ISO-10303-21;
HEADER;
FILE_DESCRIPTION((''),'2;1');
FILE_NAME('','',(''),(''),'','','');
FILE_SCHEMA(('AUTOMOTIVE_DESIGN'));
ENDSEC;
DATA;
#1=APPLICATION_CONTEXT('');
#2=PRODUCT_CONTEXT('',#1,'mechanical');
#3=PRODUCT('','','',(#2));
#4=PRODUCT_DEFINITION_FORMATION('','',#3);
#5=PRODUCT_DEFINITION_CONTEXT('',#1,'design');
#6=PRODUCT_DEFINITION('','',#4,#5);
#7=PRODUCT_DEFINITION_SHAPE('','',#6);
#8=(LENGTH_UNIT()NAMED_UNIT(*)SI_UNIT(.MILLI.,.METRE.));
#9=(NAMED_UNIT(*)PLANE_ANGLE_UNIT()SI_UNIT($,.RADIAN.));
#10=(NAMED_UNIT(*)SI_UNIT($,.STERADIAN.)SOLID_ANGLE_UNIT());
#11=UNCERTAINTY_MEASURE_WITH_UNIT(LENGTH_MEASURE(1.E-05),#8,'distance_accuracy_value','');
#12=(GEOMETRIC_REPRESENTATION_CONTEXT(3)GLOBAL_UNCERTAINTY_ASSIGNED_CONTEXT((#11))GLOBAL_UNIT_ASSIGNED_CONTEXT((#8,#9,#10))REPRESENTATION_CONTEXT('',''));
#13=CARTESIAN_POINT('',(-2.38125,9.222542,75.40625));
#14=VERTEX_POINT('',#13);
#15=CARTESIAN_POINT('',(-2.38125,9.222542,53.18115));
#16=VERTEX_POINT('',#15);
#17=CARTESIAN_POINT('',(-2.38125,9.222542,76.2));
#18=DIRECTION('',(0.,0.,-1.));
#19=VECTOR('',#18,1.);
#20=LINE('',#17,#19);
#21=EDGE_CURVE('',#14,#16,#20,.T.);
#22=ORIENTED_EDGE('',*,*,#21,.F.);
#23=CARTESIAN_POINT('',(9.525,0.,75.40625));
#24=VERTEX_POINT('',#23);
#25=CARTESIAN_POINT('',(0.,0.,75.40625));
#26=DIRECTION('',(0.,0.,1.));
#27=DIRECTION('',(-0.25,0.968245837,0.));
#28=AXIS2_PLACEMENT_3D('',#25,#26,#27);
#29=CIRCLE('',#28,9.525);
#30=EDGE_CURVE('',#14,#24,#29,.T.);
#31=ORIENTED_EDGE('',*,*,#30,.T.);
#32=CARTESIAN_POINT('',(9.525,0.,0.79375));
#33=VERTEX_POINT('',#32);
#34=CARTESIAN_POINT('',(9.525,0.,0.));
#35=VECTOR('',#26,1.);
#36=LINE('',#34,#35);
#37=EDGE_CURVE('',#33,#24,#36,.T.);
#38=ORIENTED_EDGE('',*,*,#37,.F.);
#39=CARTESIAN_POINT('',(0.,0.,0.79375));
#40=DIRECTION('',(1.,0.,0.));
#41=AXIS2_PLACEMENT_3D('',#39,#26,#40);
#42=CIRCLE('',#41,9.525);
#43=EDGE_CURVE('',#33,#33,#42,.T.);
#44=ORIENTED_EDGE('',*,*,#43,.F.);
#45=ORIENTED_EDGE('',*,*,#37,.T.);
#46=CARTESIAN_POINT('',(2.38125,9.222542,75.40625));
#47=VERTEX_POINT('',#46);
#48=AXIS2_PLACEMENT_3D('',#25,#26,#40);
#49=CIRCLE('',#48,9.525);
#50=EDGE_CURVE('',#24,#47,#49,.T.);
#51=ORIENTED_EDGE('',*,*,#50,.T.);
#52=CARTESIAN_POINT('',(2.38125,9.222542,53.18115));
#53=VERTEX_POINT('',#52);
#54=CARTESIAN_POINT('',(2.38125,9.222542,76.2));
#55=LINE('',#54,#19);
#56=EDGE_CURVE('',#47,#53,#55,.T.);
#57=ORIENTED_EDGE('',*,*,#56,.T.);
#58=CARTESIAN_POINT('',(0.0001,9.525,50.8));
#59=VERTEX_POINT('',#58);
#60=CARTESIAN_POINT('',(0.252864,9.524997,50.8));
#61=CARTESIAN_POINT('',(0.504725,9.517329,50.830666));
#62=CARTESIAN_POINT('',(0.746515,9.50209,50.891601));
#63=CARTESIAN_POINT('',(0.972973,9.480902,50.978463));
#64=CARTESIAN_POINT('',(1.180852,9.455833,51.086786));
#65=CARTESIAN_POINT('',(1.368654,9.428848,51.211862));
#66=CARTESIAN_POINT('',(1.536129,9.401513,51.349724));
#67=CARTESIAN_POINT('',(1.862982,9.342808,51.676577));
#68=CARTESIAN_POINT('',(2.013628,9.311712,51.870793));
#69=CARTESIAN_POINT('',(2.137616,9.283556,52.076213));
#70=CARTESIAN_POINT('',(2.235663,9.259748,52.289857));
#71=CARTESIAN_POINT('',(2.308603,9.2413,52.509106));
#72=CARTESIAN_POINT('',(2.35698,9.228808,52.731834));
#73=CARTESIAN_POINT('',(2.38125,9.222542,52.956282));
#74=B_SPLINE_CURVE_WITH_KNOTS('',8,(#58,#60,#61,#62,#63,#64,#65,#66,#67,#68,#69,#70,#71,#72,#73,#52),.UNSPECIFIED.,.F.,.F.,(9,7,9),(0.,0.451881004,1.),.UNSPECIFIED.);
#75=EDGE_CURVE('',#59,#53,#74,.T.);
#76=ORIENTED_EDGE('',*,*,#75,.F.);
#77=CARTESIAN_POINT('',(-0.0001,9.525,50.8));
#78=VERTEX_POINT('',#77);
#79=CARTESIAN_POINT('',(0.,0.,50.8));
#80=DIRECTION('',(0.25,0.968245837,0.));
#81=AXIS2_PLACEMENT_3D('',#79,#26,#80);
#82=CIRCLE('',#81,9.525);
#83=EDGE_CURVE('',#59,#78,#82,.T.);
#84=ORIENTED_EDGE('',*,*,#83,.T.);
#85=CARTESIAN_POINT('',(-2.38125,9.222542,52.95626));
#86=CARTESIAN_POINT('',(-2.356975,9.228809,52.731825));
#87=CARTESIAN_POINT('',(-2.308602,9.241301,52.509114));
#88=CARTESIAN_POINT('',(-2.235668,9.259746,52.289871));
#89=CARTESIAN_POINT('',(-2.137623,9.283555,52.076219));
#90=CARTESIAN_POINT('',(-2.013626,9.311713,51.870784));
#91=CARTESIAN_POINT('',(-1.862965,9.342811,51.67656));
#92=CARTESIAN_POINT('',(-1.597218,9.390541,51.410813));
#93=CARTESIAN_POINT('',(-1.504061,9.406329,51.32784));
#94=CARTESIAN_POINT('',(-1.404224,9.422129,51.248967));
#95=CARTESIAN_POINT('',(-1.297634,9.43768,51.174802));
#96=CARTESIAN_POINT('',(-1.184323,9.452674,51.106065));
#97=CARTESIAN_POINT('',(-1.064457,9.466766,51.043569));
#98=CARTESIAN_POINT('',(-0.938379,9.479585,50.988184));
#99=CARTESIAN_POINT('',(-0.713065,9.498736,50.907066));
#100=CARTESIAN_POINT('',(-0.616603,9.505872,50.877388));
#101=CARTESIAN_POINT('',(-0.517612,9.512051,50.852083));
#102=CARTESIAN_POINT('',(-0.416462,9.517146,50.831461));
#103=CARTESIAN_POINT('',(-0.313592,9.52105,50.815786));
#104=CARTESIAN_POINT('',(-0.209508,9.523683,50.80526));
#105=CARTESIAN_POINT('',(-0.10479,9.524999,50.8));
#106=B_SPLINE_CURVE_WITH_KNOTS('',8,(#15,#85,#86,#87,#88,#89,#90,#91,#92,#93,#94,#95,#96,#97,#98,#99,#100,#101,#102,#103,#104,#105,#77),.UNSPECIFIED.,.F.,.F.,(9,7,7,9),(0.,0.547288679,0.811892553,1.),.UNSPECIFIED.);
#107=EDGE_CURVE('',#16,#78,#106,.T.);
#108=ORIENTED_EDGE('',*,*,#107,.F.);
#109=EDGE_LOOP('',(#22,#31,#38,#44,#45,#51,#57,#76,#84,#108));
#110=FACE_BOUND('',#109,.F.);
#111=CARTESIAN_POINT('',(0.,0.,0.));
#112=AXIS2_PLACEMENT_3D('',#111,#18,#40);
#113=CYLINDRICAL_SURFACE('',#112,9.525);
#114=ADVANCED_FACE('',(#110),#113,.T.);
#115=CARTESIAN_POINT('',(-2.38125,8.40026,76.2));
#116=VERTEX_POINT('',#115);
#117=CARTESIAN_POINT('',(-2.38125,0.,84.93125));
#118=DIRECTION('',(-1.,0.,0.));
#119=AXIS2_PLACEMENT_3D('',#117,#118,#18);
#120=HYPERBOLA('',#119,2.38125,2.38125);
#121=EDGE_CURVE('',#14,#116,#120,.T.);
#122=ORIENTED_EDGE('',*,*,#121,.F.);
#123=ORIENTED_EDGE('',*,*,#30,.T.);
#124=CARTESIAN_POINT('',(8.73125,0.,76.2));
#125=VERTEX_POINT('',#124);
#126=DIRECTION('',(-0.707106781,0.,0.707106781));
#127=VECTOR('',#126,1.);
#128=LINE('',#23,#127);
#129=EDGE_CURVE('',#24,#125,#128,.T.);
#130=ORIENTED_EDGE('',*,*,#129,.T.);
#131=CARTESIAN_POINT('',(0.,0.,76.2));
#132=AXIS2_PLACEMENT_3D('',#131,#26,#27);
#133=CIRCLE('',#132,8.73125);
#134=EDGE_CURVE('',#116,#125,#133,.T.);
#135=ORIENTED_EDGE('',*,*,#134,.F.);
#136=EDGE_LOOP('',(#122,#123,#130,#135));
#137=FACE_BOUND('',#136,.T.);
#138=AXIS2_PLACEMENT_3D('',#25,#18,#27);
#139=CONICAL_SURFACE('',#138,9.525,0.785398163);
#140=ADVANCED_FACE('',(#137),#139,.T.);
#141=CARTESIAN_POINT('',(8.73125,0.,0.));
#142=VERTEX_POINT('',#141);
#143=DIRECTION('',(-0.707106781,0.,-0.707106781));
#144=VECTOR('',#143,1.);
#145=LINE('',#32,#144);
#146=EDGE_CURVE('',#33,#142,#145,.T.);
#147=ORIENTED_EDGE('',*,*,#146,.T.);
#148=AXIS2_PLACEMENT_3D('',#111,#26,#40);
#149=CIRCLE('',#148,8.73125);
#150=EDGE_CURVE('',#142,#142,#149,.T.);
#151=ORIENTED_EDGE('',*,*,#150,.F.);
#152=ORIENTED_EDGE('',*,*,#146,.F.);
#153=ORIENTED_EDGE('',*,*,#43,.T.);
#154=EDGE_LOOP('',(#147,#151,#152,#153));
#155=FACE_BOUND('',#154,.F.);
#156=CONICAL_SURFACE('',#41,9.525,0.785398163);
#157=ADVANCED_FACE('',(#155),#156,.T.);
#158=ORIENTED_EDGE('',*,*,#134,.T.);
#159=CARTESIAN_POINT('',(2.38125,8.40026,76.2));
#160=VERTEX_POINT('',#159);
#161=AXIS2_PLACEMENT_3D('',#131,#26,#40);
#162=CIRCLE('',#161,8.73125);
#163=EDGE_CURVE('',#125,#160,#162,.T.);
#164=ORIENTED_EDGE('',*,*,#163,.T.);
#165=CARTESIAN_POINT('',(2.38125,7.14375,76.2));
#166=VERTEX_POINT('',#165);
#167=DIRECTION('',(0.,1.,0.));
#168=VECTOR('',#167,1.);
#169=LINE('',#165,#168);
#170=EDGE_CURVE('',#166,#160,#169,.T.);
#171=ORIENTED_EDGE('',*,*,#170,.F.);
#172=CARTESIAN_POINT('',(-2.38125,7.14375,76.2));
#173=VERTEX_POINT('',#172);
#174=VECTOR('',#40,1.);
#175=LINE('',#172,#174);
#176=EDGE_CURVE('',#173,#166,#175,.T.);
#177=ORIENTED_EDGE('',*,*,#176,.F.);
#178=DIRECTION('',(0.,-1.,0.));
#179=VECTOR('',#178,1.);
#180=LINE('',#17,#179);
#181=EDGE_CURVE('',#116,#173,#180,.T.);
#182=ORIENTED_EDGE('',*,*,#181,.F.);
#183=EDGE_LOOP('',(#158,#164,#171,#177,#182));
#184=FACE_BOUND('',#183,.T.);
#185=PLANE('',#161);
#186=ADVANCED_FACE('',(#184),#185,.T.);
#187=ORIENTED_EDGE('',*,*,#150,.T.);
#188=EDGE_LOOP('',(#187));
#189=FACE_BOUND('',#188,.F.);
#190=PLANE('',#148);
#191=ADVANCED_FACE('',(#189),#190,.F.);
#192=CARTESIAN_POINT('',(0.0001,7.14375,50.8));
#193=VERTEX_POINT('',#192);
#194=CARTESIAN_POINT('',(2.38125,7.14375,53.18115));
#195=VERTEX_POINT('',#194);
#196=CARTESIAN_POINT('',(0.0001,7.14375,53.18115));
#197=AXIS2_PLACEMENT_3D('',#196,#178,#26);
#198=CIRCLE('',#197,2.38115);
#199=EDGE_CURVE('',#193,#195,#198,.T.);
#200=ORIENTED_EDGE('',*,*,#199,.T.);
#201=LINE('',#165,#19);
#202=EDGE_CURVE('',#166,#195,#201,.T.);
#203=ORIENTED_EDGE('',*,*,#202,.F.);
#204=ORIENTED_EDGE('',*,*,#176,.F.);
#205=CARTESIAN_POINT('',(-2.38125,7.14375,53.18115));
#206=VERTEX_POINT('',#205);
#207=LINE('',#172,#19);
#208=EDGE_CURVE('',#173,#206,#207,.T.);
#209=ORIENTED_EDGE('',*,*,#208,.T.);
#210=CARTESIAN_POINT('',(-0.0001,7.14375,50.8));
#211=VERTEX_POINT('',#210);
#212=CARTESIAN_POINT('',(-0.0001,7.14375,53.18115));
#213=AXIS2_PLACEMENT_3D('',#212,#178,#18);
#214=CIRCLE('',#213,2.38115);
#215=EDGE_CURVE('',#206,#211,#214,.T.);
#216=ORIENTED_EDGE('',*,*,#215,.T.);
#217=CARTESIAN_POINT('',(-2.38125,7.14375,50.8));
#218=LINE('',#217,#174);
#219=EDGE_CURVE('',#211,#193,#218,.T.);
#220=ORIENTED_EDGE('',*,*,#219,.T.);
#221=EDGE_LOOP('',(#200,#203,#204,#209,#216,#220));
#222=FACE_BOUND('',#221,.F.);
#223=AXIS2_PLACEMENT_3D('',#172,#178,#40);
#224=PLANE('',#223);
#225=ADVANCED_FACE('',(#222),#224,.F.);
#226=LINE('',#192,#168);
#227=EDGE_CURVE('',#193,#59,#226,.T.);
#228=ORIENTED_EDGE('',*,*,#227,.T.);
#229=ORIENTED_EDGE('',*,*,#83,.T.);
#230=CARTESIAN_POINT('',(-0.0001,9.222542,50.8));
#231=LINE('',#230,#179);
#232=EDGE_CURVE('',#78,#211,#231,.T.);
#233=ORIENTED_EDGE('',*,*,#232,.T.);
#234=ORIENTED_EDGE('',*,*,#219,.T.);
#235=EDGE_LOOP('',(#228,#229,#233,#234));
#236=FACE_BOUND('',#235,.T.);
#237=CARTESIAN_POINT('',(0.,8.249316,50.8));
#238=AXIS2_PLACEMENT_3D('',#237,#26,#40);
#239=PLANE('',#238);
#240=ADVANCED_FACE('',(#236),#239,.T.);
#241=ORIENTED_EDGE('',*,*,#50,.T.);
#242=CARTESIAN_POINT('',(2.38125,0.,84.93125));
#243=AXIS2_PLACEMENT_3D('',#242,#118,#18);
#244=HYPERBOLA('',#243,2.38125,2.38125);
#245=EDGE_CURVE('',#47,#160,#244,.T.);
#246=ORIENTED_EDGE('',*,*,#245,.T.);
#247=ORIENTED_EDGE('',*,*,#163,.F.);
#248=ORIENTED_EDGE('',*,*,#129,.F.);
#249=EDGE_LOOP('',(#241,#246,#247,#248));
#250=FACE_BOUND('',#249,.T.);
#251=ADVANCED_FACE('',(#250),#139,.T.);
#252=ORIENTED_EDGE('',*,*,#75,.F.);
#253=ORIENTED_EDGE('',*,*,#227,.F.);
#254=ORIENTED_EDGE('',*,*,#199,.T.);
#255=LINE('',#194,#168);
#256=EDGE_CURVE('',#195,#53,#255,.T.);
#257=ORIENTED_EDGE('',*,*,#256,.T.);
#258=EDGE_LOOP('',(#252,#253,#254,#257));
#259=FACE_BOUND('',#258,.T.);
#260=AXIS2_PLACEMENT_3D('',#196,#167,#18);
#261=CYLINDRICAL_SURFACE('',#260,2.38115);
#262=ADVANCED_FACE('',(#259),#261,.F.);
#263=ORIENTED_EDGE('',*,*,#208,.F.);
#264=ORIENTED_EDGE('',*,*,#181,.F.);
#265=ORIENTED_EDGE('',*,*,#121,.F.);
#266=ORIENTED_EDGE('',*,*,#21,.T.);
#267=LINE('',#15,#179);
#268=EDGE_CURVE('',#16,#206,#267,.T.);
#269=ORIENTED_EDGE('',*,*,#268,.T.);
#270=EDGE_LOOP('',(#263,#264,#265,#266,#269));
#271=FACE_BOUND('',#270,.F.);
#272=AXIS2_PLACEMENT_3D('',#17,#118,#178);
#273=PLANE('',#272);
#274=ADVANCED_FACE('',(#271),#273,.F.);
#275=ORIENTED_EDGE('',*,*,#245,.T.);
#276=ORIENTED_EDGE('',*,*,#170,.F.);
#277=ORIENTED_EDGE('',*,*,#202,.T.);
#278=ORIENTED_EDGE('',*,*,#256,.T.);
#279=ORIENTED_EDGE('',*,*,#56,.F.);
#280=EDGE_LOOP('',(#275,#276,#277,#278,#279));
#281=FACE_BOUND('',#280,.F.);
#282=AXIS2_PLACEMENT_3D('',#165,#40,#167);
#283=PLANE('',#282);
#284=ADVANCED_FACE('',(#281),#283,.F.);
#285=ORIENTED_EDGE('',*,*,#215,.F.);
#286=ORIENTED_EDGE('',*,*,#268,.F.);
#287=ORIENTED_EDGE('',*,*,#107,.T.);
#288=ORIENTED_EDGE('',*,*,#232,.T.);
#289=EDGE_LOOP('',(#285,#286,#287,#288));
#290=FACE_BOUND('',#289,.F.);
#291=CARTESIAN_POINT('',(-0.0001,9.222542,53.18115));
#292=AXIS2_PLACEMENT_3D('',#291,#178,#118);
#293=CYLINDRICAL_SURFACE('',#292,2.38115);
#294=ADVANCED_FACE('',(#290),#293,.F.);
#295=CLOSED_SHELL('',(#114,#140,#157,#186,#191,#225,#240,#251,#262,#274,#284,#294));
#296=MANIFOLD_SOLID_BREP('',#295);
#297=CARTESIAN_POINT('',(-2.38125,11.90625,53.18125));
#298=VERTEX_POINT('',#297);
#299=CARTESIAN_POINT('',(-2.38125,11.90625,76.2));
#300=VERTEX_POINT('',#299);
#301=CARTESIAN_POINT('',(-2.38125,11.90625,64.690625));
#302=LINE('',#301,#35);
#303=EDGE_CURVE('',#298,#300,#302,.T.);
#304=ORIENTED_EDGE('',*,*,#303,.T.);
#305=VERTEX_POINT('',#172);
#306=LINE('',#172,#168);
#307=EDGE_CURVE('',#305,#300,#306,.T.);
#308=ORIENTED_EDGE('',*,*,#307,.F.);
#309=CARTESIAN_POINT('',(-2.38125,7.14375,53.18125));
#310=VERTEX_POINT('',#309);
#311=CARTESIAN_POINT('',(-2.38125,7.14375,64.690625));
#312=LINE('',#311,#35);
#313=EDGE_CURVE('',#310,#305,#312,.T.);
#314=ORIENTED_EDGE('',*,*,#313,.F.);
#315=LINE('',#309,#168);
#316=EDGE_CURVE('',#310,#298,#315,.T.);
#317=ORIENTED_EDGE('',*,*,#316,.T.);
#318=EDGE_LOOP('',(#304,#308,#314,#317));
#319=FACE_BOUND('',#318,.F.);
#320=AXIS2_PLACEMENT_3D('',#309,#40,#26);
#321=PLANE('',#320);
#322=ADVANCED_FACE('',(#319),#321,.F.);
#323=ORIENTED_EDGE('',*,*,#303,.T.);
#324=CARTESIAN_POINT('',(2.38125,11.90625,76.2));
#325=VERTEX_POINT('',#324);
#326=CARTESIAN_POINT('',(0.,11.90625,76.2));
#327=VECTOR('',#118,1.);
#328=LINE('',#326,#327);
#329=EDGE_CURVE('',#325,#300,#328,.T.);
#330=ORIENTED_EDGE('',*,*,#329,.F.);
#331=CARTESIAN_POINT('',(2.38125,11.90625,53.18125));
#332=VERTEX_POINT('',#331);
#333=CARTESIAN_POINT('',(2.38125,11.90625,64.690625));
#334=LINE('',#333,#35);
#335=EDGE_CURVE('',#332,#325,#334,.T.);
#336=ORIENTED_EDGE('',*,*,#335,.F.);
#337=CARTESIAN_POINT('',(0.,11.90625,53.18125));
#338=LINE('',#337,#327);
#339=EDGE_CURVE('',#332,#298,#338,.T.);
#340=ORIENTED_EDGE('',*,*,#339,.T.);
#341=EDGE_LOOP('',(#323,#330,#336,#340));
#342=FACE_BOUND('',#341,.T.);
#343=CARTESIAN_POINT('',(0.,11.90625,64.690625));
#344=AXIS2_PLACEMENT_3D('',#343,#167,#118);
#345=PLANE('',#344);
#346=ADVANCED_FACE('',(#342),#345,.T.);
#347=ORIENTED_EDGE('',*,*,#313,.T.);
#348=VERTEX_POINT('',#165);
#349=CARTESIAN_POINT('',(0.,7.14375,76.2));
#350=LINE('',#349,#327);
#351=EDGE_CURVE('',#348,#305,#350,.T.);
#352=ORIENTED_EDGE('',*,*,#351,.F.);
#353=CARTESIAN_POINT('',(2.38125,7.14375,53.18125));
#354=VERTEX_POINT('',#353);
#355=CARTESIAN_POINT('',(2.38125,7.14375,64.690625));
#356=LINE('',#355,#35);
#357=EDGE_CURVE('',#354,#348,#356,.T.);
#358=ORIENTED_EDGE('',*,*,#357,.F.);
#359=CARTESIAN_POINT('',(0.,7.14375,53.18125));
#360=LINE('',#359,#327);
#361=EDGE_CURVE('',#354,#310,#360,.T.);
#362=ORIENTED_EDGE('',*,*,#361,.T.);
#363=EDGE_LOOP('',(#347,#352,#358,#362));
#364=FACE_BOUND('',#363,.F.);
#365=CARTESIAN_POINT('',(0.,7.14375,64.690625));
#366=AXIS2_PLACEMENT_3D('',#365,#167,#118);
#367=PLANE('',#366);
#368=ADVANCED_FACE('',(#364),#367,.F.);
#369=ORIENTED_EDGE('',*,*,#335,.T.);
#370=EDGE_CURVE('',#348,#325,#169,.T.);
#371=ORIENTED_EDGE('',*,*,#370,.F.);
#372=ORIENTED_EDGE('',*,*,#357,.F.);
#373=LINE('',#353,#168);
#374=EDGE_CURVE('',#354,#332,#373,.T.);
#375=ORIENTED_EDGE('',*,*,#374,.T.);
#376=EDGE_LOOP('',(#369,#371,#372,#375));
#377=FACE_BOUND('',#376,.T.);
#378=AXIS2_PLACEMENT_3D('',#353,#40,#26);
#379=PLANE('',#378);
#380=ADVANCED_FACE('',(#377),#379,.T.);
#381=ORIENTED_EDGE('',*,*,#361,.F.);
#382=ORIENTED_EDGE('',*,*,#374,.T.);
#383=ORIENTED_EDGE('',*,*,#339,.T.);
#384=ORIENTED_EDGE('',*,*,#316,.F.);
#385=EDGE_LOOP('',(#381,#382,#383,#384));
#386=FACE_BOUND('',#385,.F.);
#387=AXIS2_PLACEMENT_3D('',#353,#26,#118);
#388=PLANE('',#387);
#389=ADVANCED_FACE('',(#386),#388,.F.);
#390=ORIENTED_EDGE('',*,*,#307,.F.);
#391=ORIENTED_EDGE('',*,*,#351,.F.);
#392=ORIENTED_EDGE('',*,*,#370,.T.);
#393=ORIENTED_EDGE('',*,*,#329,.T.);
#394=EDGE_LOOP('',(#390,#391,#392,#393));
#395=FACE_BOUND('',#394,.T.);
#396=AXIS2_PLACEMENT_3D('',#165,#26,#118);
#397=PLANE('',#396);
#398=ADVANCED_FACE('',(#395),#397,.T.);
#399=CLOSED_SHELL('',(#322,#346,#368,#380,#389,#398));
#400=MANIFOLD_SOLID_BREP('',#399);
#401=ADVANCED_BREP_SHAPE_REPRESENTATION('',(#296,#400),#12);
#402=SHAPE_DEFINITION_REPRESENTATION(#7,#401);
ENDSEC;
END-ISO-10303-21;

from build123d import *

# Parameters (mm, degrees)
F0_R     = 9.525
F1_DEPTH = 76.2
F3_DEPTH = 25.4
F4_R     = 2.38115
F5_W     = 4.7625
F5_H     = 23.01875
F6_DEPTH = 4.7625
F7_SIZE  = 0.79375


# Not quite as in the source:
# - a fillet or chamfer is up to 0.001 mm smaller than in the source, because OpenCascade refuses the exact size


with BuildPart() as f1:
    # F0 (on Top) → F1 (new body)
    with BuildSketch(Plane.XY):
        Circle(F0_R)
    extrude(amount=F1_DEPTH)

    # F2 (on face) → F3 (cut)
    with BuildSketch(Plane.XY.offset(76.2)):
        with BuildLine():
            ThreePointArc((2.38125, 9.2225415932), (0, 9.525), (-2.38125, 9.2225415932))
            Line((-2.38125, 9.2225415932), (-2.38125, 7.14375))
            Line((-2.38125, 7.14375), (2.38125, 7.14375))
            Line((2.38125, 7.14375), (2.38125, 9.2225415932))
        make_face()
    extrude(amount=-F3_DEPTH, mode=Mode.SUBTRACT)

    # F4 (radius 2.38125 in the source; OpenCascade refuses exactly that, so slightly less here)
    f4_edges = [f1.edges().sort_by_distance(p)[0] for p in [
        (2.38125, 8.183146, 50.8),
        (-2.38125, 8.183146, 50.8),
    ]]
    fillet(f4_edges, radius=F4_R)

    # F7
    f7_edges = [f1.edges().sort_by_distance(p)[0] for p in [
        (-5.832847, -7.530174, 76.2),
        (-9.525, 0, 0),
    ]]
    chamfer(f7_edges, length=F7_SIZE)


with BuildPart() as f6:
    # F5 (on face) → F6 (new body)
    with BuildSketch(Plane(origin=(0, 7.14375, 0), x_dir=(-1, 0, 0), z_dir=(0, 1, 0))):
        with Locations((0, 64.690625)):
            Rectangle(F5_W, F5_H)
    extrude(amount=F6_DEPTH)


solid = Compound([f1.part, f6.part])
